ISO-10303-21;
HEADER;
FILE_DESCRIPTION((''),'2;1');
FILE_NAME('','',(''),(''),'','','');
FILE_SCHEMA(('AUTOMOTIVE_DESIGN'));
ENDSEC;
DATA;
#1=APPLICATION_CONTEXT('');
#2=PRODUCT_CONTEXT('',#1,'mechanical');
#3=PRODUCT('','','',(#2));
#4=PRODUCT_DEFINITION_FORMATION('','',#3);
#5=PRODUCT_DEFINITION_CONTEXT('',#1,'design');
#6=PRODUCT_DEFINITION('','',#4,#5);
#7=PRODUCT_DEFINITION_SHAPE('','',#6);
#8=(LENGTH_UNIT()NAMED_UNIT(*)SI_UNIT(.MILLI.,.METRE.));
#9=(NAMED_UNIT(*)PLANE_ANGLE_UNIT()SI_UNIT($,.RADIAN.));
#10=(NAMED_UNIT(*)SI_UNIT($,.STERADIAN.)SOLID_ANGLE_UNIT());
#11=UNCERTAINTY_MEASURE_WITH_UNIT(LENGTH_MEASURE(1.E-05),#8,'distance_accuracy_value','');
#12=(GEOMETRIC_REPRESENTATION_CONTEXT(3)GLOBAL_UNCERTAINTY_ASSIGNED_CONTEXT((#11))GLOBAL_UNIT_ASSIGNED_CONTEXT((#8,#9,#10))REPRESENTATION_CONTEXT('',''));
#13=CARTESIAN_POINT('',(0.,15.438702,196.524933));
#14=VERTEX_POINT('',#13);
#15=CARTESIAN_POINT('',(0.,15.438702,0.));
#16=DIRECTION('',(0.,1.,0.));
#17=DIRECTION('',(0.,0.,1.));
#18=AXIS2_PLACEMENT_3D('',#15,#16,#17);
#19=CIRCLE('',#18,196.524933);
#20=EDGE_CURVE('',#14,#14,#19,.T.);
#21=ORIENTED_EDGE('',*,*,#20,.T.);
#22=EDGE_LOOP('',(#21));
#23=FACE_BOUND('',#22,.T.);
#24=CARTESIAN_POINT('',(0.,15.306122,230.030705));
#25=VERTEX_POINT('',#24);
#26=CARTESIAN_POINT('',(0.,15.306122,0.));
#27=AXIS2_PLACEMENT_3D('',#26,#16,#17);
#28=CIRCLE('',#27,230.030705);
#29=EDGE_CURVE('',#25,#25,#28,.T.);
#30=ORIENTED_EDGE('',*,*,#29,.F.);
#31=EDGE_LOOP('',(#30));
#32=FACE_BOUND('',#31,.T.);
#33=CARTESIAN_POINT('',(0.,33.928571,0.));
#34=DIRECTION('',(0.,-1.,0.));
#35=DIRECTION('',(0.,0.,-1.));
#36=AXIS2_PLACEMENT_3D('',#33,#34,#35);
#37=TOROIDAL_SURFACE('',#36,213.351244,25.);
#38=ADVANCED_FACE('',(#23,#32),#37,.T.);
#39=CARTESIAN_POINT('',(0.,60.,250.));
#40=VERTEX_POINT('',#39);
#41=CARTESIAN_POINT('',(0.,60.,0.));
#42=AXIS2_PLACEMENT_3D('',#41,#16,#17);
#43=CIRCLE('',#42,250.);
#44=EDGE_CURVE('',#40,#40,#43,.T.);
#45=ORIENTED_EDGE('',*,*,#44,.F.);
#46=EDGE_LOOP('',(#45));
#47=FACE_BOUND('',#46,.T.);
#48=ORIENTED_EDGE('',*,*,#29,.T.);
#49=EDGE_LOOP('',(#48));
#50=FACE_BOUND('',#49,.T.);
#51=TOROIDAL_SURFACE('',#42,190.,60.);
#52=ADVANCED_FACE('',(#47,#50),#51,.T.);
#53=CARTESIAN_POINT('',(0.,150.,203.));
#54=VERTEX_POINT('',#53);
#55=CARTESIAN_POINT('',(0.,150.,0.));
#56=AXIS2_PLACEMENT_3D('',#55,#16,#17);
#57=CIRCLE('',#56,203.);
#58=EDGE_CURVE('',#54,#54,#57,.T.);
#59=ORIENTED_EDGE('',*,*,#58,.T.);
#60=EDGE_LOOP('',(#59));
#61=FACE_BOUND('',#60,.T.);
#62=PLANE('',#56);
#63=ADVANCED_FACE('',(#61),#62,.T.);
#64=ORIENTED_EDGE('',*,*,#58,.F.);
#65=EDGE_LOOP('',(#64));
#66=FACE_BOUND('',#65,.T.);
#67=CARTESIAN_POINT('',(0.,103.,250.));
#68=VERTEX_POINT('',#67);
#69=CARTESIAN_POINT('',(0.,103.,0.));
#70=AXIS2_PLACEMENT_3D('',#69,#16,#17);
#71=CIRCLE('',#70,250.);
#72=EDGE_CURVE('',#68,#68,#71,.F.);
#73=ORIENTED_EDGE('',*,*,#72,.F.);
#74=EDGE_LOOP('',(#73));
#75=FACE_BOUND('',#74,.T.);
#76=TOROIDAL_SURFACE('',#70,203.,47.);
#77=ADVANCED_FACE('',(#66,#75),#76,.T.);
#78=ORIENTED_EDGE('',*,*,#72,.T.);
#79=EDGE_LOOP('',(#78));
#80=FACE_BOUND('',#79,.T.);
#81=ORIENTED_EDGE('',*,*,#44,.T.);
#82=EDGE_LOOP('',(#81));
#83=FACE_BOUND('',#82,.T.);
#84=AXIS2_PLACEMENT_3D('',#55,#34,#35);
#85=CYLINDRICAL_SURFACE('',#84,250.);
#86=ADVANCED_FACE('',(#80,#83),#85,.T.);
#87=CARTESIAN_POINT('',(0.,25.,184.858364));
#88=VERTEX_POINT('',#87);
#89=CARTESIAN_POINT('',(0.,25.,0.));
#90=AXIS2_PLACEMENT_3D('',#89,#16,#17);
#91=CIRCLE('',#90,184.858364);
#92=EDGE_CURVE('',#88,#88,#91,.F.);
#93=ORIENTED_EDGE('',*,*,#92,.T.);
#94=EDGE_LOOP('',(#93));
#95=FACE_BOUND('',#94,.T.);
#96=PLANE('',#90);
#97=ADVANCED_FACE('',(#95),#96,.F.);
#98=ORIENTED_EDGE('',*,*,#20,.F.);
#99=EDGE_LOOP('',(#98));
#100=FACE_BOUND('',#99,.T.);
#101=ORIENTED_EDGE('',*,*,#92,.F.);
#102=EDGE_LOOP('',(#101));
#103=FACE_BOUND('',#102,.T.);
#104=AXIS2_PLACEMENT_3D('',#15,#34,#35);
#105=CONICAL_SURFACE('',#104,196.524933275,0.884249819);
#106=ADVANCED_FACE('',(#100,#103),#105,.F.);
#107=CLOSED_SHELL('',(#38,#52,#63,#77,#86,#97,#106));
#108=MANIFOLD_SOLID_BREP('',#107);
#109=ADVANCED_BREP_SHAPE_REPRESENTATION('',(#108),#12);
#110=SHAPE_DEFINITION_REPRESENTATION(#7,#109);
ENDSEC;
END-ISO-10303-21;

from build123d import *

# Parameters (mm, degrees)
SKETCH_4_R          = 250
EXTRUDE_2_DEPTH     = 150
FILLET_1_R          = 60
FILLET_2_R          = 47
SKETCH_16_R         = 190
CUT_EXTRUDE_1_DEPTH = 25
FILLET_3_R          = 25


with BuildPart() as part:
    # 草图4 → 凸台-拉伸2 (new body)
    with BuildSketch(Plane(origin=(0, 0, 0), x_dir=(1, 0, 0), z_dir=(0, 1, 0))):
        with Locations(Location((0, 0, 0), (0, 0, 270))):
            Circle(SKETCH_4_R)
    extrude(amount=EXTRUDE_2_DEPTH)

    # 圆角1
    fillet_1_edges = [part.edges().sort_by_distance(p)[0] for p in [
        (0, 0, -250),
    ]]
    fillet(fillet_1_edges, radius=FILLET_1_R)

    # 圆角2
    fillet_2_edges = [part.edges().sort_by_distance(p)[0] for p in [
        (0, 150, -250),
    ]]
    fillet(fillet_2_edges, radius=FILLET_2_R)

    # 草图16 → 切除-拉伸1 (cut)
    with BuildSketch(Plane(origin=(0, 0, 0), x_dir=(1, 0, 0), z_dir=(0, 1, 0))):
        with Locations(Location((0, 0, 0), (0, 0, 270))):
            Circle(SKETCH_16_R)
    extrude(amount=CUT_EXTRUDE_1_DEPTH, mode=Mode.SUBTRACT)

    # 圆角3
    # the kernel refuses this fillet: 25 mm, written as the material it takes off along each edge
    with BuildSketch(Plane(origin=(0, 0, 0), x_dir=(0, 0, 1), z_dir=(-1, 0, 0))) as fillet_3_piece_1:
        with BuildLine():
            CenterArc((213.35124434, 33.928571429), FILLET_3_R, 200.924832428, 110.924832428)
            Line((190, 25), (189.532975113, 24.821428571))
            ThreePointArc((189.532975113, 24.821428571), (189.5, 12.5), (189.5, 0))
            Line((189.5, 0), (190, -0.5))
            ThreePointArc((190, -0.5), (211.607142857, 3.489988696), (230.364293788, 14.933673469))
            Line((230.364293788, 14.933673469), (230.030704584, 15.306122449))
        make_face()
    revolve(axis=Axis((0, 0, 0), (0, 1, 0)), mode=Mode.SUBTRACT)

    # 倒角1
    # the kernel refuses this chamfer: 17.333818879, 10 mm, written as the material it adds along each edge
    with BuildSketch(Plane(origin=(0, 25, 0), x_dir=(0, 0, 1), z_dir=(-1, 0, 0))) as chamfer_1_piece_1:
        with BuildLine():
            Line((197.061199814, -10.000793021), (184.322097601, 0.439495442))
            Line((184.322097601, 0.439495442), (184.322097601, 0.786171819))
            ThreePointArc((184.322097601, 0.786171819), (187.161048801, 0.346676378), (190, 0.346676378))
            Line((190, 0.346676378), (190.323812992, 0.123812992))
            ThreePointArc((190.323812992, 0.123812992), (193.180553266, -5.246391965), (197.294531196, -9.744392989))
            Line((197.294531196, -9.744392989), (197.061199814, -10.000793021))
        make_face()
    revolve(axis=Axis((0, 25, 0), (0, 1, 0)))


solid = part.part
